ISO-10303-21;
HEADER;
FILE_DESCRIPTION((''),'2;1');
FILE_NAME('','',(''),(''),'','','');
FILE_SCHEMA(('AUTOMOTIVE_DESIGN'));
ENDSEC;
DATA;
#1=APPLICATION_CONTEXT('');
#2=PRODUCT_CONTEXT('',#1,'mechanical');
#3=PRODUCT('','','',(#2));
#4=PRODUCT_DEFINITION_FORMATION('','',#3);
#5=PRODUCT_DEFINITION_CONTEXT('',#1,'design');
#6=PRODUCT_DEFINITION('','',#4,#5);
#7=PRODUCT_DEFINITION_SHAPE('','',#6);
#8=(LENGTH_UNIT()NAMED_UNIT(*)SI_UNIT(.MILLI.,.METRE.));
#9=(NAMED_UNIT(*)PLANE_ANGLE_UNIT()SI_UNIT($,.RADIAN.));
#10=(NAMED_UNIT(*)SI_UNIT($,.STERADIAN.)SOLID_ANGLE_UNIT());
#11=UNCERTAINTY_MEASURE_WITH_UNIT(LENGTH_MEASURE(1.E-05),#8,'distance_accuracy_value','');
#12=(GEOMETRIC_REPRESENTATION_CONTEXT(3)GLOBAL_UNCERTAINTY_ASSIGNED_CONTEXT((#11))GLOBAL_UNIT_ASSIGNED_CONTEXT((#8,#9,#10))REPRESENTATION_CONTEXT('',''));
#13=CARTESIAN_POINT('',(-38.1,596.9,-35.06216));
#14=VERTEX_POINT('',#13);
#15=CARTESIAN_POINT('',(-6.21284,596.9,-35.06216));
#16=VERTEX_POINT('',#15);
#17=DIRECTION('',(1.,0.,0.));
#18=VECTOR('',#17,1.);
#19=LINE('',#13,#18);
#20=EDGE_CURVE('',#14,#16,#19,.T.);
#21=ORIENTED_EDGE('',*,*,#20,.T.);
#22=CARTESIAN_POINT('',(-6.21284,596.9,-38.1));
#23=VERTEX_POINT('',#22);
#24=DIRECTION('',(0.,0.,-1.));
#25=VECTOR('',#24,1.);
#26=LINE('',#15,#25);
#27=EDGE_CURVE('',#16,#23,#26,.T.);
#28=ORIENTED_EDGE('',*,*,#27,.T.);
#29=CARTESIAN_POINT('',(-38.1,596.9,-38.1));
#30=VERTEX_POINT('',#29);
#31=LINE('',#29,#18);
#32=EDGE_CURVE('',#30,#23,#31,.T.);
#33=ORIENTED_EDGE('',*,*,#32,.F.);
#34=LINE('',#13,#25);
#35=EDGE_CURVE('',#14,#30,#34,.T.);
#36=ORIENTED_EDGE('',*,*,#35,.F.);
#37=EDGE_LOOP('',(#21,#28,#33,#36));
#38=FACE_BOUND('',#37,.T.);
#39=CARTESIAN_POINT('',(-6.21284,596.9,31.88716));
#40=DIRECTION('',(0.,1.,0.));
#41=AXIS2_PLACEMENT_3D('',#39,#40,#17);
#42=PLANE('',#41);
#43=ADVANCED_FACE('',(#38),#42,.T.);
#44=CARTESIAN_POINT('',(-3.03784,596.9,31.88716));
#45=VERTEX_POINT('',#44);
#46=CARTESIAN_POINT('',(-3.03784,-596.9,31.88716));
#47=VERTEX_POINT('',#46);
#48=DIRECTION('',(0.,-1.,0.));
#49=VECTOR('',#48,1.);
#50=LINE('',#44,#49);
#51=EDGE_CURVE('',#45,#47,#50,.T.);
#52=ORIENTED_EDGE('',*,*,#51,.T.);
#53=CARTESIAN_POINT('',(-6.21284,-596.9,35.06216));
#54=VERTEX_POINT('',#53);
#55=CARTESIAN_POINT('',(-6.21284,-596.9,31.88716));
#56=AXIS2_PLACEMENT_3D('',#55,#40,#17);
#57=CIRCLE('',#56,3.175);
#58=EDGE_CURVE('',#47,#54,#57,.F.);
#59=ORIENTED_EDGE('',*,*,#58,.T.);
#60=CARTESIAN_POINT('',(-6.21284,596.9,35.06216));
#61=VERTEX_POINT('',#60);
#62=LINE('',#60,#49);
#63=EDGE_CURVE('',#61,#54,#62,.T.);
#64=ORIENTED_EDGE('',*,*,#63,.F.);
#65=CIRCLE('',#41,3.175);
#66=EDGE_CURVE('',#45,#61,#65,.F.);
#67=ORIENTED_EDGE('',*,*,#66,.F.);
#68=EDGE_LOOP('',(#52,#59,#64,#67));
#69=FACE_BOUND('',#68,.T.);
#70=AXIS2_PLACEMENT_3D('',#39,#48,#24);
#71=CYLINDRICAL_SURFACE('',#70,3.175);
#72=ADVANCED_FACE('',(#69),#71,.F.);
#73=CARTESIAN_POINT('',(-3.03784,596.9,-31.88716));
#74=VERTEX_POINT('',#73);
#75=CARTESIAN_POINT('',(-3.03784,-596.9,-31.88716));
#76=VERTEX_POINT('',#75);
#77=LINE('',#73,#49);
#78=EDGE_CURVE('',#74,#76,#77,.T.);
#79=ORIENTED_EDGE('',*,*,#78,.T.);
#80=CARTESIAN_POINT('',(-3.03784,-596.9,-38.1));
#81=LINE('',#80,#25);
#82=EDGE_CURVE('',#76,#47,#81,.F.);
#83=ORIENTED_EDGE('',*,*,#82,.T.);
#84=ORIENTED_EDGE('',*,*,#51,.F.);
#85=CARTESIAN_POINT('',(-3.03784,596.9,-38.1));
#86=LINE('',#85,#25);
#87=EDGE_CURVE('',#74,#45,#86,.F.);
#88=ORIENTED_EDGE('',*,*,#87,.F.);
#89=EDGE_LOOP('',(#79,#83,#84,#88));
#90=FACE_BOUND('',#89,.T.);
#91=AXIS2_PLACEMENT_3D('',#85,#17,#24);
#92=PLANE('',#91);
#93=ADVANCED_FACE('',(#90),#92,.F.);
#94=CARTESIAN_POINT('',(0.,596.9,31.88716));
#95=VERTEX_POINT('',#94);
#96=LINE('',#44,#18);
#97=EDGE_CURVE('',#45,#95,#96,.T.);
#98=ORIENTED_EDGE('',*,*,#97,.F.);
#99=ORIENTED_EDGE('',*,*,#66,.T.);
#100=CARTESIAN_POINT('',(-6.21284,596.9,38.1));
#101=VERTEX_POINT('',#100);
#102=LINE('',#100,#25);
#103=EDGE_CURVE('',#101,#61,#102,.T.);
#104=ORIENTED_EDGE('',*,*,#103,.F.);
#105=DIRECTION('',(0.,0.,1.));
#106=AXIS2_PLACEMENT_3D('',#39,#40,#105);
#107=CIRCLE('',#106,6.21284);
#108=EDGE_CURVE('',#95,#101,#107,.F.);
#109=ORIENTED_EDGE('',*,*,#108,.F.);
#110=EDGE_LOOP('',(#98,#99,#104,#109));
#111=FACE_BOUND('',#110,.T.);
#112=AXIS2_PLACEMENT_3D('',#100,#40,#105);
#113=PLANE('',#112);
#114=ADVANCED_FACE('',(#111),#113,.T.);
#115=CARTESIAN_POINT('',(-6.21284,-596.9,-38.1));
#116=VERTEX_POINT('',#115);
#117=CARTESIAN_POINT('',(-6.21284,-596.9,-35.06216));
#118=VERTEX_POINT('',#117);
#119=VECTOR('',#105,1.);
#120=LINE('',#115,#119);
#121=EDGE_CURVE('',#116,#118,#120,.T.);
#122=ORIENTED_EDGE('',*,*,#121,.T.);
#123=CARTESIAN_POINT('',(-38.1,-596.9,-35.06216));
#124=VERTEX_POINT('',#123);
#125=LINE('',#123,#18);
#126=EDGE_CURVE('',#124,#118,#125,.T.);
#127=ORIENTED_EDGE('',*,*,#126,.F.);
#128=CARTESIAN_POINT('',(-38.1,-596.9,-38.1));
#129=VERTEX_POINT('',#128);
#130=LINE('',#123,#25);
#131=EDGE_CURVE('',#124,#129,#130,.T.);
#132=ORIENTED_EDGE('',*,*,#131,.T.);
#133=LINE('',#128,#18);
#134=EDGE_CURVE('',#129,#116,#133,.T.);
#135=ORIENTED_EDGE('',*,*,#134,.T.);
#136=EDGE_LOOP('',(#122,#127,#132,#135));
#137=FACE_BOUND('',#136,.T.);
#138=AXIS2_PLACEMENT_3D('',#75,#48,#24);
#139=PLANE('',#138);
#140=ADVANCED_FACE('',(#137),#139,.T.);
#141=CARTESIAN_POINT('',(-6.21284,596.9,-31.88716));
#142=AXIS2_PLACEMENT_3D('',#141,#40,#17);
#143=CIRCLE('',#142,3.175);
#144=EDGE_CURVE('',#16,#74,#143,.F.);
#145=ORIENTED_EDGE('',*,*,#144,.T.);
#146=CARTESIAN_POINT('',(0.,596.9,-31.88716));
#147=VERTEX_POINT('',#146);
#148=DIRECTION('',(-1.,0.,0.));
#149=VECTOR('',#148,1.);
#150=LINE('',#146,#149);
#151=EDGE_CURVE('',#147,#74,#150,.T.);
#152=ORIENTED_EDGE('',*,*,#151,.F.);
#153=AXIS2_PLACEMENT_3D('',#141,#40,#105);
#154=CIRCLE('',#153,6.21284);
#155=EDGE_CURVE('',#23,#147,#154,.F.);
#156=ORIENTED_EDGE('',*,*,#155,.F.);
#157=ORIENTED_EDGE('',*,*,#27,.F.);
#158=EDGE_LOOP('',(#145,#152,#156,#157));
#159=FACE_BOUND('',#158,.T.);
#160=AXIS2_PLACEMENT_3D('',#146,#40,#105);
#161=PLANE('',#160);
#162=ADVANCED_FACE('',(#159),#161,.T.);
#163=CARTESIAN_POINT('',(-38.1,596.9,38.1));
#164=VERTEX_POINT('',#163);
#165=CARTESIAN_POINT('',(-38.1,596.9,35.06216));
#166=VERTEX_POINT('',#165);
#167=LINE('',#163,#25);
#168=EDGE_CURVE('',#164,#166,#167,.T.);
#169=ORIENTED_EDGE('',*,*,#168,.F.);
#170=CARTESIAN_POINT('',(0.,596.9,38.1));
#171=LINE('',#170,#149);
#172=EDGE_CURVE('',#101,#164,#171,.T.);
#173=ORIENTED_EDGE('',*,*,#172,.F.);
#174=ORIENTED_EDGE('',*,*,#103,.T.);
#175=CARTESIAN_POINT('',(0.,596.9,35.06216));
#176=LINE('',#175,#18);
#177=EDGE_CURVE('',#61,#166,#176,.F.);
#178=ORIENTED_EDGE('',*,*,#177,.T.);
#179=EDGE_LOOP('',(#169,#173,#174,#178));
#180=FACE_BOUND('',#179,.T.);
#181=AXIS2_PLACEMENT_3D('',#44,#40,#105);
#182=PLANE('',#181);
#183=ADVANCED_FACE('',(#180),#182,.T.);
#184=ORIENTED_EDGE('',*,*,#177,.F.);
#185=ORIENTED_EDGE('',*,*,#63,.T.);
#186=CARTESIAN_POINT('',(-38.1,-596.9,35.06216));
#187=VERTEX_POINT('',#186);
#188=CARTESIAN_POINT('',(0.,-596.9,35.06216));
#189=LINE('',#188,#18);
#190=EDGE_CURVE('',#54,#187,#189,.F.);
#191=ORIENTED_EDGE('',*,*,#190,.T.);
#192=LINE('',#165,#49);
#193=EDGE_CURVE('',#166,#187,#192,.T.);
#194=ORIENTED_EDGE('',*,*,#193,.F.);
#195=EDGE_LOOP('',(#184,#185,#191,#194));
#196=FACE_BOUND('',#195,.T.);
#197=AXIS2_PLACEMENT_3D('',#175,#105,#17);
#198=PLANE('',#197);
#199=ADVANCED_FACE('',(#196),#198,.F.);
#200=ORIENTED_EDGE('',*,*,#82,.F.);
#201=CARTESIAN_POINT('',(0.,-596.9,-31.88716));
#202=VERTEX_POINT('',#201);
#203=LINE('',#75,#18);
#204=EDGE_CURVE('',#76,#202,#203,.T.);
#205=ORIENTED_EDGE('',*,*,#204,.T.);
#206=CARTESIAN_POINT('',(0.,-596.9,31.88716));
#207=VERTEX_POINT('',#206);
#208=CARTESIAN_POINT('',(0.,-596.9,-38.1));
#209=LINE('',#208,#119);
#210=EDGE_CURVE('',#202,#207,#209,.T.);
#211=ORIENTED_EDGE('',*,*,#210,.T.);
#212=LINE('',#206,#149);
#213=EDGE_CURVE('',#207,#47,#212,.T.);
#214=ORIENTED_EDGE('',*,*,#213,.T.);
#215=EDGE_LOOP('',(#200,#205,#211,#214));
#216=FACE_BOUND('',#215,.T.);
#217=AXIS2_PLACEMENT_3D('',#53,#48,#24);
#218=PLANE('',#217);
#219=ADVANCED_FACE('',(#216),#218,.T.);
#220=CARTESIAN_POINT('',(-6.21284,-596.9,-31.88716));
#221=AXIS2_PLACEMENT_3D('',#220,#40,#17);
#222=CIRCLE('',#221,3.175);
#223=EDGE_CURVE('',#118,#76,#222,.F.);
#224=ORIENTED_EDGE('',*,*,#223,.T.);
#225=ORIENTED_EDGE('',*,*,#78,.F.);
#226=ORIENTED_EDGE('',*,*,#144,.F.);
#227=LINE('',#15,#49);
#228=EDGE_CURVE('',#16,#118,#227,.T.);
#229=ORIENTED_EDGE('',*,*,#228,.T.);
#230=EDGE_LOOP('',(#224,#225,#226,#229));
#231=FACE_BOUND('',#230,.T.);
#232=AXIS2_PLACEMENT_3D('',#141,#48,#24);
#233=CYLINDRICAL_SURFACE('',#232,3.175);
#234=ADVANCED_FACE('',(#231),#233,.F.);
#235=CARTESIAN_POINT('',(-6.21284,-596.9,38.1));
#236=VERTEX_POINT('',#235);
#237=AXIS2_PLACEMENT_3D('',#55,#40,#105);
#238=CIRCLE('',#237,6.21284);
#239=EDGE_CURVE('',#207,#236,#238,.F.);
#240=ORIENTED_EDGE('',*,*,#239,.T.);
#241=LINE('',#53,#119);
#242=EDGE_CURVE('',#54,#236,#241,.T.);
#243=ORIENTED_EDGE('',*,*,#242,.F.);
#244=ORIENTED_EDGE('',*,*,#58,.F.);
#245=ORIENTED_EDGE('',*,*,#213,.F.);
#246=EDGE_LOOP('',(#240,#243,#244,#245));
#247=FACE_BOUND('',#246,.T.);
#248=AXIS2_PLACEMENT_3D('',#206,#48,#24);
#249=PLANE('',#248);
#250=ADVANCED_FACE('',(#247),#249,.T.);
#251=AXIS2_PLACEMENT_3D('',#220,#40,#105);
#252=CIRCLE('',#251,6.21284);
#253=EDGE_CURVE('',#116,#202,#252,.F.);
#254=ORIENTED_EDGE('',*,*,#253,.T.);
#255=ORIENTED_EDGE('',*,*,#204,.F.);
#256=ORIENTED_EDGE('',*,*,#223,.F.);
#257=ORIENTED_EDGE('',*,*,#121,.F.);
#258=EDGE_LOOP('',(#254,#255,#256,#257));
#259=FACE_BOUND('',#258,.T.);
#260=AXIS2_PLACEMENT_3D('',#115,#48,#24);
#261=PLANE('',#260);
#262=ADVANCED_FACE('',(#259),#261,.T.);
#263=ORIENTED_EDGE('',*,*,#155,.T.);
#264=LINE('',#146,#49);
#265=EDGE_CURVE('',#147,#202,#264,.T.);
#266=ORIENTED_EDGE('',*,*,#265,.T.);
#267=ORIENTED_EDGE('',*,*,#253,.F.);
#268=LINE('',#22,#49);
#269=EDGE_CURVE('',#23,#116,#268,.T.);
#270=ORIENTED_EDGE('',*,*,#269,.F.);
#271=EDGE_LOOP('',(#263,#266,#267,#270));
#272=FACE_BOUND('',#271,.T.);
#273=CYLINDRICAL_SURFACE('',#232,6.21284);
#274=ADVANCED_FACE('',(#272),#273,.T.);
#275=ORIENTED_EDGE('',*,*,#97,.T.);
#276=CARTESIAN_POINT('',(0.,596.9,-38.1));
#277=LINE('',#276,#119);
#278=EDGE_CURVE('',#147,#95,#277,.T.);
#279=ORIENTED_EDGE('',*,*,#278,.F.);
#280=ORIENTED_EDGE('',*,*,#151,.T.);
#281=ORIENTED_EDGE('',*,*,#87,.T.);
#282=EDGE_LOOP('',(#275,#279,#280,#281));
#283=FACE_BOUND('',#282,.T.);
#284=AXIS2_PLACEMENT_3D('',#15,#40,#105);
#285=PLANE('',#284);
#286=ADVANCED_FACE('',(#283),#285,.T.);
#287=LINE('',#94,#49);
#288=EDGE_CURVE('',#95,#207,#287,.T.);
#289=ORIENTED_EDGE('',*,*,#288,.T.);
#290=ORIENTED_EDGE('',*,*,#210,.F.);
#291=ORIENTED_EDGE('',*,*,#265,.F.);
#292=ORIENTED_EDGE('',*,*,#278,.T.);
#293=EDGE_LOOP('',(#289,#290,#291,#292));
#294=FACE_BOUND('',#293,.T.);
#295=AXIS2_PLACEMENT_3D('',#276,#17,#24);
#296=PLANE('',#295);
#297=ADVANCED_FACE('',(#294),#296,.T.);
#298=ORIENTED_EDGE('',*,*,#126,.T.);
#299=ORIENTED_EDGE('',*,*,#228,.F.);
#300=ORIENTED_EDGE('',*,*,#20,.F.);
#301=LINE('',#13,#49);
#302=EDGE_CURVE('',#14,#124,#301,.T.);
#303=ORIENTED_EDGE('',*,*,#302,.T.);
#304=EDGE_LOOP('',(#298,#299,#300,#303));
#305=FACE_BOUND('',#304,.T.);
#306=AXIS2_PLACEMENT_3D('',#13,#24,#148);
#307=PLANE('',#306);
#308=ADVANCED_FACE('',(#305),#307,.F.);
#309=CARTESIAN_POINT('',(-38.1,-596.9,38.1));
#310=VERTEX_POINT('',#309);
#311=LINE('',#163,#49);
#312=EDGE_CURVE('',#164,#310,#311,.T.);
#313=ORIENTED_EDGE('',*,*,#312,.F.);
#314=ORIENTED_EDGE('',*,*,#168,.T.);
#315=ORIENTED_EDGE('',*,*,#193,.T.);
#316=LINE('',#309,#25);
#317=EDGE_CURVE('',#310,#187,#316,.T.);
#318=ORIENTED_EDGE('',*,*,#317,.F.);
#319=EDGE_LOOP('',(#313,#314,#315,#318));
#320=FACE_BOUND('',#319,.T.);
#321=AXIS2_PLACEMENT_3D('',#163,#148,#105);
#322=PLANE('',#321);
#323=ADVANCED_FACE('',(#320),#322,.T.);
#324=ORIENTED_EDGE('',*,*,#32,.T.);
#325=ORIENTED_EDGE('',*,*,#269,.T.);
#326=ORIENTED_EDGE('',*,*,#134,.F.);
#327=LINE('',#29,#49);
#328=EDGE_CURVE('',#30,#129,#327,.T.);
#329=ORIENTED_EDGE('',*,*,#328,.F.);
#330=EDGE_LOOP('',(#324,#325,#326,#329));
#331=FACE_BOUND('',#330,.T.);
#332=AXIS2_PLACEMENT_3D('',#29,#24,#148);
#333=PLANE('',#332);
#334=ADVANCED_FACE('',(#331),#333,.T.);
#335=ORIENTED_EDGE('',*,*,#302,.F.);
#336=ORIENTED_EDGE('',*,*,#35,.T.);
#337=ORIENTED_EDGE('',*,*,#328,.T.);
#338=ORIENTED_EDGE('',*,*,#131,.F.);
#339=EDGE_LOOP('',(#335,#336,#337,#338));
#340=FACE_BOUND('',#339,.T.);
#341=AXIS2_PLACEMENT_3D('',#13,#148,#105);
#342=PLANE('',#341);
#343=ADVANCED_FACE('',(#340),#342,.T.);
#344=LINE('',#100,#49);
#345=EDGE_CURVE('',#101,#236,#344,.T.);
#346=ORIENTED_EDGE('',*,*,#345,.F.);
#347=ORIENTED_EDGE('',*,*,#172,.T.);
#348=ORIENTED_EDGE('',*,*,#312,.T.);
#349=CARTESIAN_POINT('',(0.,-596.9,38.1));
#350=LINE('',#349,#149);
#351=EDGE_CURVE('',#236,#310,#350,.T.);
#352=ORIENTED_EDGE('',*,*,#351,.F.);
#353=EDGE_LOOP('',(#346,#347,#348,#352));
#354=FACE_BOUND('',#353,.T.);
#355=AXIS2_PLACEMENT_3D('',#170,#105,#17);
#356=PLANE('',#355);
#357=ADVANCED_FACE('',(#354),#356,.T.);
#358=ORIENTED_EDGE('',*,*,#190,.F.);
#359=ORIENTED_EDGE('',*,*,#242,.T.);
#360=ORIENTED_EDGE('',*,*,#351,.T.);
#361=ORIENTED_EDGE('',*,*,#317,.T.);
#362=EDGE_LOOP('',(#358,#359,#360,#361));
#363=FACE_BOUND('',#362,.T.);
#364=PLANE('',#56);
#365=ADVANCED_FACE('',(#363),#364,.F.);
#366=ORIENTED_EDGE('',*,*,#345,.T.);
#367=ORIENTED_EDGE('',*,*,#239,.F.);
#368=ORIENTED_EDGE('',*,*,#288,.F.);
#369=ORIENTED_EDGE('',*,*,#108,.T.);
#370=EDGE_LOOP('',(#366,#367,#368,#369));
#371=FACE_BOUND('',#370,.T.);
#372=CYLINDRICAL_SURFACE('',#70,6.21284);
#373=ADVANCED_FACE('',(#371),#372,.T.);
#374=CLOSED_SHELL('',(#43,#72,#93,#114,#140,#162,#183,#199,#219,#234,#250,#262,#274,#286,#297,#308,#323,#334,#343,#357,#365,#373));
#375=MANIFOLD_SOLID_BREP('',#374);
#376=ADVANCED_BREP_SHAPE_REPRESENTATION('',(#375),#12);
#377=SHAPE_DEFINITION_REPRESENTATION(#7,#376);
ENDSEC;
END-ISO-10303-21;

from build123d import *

# Parameters (mm, degrees)
BASE_FLANGE1_DEPTH = 596.9


# Sheet-metal steps are written as plain solids
with BuildPart() as part:
    # Sketch1 → Base-Flange1 (new, symmetric)
    with BuildSketch(Plane(origin=(0, 0, 0), x_dir=(1, 0, 0), z_dir=(0, 1, 0))):
        with BuildLine():
            Line((-38.1, 38.1), (-6.21284, 38.1))
            ThreePointArc((-6.21284, 38.1), (-1.819698706, 36.280301294), (0, 31.88716))
            Line((0, 31.88716), (0, -31.88716))
            ThreePointArc((0, -31.88716), (-1.819698706, -36.280301294), (-6.21284, -38.1))
            Line((-6.21284, -38.1), (-38.1, -38.1))
            Line((-38.1, -38.1), (-38.1, -35.06216))
            Line((-38.1, -35.06216), (-6.21284, -35.06216))
            ThreePointArc((-6.21284, -35.06216), (-3.96777597, -34.13222403), (-3.03784, -31.88716))
            Line((-3.03784, -31.88716), (-3.03784, 31.88716))
            ThreePointArc((-3.03784, 31.88716), (-3.96777597, 34.13222403), (-6.21284, 35.06216))
            Line((-6.21284, 35.06216), (-38.1, 35.06216))
            Line((-38.1, 35.06216), (-38.1, 38.1))
        make_face()
    extrude(amount=BASE_FLANGE1_DEPTH, both=True)


solid = part.part
